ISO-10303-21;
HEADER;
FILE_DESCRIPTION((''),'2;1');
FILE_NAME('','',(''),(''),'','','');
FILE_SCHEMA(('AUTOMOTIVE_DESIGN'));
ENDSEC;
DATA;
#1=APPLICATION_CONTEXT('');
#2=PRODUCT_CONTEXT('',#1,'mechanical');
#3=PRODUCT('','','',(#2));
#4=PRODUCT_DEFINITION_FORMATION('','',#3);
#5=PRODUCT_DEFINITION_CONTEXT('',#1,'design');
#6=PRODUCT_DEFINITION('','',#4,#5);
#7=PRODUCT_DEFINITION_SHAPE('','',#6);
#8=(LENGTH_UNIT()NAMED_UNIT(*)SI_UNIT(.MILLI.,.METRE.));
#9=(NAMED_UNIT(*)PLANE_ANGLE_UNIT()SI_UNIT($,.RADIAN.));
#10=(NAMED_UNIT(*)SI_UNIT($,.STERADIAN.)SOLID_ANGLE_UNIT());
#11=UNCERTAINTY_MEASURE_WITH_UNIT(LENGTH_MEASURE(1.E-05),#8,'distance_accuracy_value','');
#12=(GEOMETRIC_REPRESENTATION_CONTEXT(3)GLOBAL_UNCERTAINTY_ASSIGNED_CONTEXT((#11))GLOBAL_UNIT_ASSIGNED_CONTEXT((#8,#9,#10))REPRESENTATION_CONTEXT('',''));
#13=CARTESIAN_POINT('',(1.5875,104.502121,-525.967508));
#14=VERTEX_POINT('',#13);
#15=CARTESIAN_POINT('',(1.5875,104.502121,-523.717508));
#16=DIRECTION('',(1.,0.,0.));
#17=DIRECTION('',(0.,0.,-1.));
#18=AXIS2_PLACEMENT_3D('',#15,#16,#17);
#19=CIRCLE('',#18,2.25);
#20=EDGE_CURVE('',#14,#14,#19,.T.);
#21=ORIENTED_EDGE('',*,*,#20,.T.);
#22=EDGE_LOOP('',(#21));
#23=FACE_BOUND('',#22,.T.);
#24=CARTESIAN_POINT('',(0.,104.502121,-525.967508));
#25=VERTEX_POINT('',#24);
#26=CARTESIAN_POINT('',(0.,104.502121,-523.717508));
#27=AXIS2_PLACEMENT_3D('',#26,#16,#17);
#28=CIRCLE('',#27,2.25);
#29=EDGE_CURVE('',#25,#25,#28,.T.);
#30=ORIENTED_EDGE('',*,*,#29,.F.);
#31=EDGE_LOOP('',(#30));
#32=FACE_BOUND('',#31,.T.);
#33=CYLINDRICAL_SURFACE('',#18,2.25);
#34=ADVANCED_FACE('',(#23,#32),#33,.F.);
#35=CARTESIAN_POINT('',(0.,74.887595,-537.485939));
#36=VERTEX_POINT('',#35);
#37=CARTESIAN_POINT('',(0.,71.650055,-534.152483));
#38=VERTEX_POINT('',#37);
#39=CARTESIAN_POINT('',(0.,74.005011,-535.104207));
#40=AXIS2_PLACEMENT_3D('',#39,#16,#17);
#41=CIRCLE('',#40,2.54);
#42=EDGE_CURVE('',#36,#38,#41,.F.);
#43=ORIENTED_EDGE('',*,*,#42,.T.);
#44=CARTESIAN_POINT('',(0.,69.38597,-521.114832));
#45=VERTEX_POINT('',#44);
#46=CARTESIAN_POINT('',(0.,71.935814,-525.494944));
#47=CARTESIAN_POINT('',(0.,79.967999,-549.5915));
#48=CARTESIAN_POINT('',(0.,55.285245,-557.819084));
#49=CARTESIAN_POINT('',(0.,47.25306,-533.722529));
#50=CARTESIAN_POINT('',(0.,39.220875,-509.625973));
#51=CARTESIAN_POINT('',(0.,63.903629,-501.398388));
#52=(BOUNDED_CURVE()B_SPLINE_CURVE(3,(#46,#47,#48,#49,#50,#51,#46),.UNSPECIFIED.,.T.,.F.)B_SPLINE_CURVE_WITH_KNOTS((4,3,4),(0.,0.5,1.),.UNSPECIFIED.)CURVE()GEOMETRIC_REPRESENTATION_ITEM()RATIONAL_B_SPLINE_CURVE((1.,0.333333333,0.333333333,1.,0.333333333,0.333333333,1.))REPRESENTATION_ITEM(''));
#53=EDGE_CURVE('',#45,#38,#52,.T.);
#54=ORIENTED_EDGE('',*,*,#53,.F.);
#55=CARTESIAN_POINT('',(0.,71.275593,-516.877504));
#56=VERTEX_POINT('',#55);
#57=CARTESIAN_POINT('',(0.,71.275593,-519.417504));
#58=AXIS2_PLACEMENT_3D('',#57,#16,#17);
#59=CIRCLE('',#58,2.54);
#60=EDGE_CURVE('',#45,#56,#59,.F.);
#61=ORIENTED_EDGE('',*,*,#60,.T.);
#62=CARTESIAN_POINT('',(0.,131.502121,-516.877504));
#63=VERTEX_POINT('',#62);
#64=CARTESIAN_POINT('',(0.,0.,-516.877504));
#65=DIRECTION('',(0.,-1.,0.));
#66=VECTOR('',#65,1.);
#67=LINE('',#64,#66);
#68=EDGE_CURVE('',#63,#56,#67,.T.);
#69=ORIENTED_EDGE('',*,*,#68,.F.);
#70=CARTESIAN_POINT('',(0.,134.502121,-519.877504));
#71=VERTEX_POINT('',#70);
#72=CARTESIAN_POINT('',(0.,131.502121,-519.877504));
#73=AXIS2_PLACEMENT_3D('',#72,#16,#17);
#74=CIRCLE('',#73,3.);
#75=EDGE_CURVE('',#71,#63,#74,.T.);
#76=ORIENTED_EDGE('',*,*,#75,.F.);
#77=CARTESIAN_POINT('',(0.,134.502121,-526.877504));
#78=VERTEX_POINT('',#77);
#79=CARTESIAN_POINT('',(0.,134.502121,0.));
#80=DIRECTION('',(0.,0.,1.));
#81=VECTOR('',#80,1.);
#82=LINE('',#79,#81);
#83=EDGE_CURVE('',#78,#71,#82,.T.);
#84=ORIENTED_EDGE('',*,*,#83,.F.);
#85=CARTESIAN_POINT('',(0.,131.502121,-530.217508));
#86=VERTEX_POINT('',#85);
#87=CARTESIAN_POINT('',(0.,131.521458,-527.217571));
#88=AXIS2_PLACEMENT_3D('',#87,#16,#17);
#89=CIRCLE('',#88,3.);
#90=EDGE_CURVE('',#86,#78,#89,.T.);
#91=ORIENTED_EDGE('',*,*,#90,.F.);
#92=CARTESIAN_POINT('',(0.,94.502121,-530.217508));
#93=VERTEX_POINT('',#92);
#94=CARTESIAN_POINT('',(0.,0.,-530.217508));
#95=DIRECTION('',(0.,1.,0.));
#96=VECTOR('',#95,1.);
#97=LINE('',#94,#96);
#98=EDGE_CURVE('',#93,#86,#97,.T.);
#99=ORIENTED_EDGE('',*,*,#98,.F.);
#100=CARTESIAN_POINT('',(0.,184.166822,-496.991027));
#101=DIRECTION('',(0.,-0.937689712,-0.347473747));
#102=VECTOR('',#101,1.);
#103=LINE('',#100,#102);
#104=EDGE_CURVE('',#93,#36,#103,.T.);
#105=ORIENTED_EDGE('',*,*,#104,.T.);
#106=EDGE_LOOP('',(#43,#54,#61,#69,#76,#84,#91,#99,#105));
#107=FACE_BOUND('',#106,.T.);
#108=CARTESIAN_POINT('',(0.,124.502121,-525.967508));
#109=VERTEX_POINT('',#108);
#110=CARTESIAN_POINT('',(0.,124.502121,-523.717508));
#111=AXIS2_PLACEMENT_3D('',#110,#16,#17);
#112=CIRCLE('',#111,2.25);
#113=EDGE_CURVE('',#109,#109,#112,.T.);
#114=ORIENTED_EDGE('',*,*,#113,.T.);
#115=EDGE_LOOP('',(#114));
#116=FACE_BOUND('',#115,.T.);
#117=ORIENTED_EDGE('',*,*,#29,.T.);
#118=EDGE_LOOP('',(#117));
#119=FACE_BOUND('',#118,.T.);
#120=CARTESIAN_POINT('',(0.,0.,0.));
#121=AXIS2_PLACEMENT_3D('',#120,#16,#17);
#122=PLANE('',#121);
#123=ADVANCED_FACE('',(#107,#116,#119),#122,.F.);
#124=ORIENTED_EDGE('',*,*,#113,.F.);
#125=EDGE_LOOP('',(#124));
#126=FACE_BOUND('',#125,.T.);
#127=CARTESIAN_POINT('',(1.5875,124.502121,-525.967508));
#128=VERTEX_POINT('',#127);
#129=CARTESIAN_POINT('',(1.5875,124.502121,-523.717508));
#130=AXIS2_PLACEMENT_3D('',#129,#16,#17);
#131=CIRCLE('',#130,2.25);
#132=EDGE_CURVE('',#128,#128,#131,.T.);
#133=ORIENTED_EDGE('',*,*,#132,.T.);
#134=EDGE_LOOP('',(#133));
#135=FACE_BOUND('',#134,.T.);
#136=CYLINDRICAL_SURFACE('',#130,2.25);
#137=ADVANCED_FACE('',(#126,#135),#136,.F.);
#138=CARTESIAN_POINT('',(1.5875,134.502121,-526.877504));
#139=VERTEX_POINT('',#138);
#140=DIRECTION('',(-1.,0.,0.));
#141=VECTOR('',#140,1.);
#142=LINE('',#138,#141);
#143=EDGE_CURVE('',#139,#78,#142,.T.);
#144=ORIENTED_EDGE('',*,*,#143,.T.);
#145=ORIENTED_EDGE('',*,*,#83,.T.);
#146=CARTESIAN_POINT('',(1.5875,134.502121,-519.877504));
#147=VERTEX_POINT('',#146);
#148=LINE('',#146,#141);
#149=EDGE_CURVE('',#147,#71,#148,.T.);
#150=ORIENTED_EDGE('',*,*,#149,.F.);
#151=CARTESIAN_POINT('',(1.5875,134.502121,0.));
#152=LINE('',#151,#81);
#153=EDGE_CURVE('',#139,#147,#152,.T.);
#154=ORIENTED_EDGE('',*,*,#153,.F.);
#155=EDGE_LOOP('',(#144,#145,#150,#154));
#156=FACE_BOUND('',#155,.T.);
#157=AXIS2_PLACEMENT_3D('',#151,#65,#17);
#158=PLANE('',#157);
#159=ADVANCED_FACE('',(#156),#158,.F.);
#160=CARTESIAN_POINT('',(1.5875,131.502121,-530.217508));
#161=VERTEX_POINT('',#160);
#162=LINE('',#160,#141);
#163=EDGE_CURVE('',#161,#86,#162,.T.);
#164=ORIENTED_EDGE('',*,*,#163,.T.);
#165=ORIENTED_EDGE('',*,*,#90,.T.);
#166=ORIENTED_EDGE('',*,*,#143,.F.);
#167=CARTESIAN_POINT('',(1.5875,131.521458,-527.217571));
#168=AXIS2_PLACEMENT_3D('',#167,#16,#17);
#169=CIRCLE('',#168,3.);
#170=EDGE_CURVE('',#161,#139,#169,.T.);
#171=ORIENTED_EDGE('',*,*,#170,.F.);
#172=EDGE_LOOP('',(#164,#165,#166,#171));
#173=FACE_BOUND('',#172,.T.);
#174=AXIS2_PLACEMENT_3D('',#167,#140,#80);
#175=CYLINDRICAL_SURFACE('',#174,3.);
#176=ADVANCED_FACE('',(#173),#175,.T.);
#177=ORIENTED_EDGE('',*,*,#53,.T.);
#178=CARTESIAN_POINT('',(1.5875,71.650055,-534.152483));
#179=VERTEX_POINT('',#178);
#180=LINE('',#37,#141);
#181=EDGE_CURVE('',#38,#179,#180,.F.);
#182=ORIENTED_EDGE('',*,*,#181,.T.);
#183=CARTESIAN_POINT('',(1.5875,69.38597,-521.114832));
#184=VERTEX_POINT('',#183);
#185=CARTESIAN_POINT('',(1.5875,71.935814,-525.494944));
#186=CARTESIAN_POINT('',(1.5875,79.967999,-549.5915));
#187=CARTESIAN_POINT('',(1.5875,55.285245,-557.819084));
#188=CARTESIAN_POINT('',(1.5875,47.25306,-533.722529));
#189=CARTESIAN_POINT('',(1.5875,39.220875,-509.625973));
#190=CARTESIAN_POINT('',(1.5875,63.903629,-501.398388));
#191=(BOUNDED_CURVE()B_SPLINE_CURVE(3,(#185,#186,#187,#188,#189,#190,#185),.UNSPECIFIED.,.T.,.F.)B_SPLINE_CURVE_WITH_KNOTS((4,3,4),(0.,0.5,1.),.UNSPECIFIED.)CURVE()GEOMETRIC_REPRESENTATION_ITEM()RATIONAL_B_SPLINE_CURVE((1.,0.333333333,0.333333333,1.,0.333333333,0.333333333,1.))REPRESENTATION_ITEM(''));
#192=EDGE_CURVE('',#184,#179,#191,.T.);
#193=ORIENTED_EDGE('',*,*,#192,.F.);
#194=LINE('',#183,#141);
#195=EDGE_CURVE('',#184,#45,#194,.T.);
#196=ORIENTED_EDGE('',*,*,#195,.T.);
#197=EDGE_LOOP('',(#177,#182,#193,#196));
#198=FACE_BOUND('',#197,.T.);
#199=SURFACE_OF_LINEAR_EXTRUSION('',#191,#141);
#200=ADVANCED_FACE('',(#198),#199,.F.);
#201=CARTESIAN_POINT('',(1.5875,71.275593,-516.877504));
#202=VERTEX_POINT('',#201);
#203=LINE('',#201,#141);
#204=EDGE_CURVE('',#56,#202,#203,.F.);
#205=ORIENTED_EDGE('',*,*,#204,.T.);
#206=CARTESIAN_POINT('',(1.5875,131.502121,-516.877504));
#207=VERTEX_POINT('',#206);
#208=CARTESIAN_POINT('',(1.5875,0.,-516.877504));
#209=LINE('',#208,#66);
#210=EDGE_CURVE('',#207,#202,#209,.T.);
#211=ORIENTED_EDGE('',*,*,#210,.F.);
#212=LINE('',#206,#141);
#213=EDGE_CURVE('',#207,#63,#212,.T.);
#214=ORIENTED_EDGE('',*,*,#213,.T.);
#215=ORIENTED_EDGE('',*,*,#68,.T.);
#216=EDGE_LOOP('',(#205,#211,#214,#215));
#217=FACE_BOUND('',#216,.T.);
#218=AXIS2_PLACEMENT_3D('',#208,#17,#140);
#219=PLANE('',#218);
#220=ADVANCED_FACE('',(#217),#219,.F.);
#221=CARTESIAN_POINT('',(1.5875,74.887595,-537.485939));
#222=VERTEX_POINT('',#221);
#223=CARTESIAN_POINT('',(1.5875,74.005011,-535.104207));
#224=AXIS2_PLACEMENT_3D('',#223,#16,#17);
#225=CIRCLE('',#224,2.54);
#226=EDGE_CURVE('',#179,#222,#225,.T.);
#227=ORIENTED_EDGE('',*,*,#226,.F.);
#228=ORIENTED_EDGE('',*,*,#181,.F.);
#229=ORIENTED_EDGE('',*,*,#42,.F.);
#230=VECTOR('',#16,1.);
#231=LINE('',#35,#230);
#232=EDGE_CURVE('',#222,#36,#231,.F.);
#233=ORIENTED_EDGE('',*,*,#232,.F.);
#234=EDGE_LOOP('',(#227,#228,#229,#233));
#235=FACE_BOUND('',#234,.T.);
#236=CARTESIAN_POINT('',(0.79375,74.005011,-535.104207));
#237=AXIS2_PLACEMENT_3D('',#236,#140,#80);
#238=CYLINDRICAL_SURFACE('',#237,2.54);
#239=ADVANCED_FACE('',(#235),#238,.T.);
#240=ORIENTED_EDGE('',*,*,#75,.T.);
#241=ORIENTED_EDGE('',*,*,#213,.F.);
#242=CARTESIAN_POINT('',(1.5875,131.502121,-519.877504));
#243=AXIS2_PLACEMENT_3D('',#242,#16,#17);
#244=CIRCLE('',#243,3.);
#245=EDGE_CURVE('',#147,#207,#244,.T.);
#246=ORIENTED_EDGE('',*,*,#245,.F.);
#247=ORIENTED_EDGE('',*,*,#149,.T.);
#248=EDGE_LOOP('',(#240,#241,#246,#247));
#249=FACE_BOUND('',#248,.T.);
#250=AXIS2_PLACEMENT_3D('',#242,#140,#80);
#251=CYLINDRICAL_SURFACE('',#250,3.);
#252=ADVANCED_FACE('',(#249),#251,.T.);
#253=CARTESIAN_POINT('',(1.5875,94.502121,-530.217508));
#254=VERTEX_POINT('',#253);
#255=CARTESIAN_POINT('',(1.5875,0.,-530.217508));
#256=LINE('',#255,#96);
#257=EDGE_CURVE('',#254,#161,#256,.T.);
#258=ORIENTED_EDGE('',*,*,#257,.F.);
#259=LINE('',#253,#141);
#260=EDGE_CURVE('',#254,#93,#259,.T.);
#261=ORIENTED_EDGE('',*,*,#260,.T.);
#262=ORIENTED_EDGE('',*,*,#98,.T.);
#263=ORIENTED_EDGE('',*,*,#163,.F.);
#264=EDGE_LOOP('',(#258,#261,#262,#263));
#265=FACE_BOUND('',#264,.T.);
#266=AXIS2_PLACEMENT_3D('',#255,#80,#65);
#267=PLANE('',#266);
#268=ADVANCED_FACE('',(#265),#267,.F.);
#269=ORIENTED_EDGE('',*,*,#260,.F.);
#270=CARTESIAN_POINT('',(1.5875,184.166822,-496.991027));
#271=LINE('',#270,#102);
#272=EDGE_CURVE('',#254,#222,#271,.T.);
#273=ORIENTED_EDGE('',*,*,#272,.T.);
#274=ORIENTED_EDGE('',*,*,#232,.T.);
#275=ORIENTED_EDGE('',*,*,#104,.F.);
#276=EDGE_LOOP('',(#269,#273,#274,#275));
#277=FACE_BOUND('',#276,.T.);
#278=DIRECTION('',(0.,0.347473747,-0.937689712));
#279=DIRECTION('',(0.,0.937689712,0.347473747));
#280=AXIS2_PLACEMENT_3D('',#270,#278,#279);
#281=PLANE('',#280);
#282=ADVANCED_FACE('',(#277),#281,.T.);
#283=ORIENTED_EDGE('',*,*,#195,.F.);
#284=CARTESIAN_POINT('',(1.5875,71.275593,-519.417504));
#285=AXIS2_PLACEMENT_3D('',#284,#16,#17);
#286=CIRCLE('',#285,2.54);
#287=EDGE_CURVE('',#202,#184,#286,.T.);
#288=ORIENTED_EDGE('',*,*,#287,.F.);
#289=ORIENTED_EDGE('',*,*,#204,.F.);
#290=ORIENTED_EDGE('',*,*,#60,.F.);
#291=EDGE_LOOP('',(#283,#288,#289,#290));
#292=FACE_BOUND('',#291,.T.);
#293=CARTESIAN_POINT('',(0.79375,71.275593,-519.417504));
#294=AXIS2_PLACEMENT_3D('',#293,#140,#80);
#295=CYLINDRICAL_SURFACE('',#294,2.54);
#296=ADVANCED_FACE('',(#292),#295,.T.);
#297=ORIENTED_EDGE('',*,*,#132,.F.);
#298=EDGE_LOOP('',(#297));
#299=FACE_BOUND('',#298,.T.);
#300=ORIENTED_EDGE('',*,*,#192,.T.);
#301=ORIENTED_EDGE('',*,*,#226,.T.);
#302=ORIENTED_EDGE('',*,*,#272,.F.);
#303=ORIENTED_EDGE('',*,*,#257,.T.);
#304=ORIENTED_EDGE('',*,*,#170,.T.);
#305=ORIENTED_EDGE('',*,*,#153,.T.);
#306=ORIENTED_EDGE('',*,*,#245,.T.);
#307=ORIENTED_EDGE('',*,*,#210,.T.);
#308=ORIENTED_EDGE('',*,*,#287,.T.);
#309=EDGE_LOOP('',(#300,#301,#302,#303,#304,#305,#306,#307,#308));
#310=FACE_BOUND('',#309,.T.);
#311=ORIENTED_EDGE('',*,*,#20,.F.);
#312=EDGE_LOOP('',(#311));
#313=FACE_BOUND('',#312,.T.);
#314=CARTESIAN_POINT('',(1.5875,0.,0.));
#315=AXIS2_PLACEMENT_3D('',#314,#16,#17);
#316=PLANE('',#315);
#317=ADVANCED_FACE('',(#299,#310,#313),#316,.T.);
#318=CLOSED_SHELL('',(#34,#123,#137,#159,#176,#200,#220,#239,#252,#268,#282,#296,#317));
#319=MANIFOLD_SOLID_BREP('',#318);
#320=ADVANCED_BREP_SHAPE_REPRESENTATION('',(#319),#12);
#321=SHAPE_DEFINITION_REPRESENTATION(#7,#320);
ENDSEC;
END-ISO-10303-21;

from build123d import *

# Parameters (mm, degrees)
SKETCH1_R            = 3.025
BOSS_EXTRUDE1_DEPTH  = 1.5875
FILLET1_START        = -1
FILLET1_DEPTH        = 4
M4_CLEARANCE_HOLE1_D = 4.5


with BuildPart() as part:
    # Sketch1 → Boss-Extrude1 (new body)
    # profile 1 of 4: a face of its own
    with BuildSketch(Plane(origin=(0, 0, 0), x_dir=(0, 0, -1), z_dir=(1, 0, 0))):
        with BuildLine():
            Line((541.51052412, 64.02688415), (530.217508306, 94.502121028))
            Line((530.217508306, 94.502121028), (516.877503621, 94.502121028))
            Line((516.877503621, 94.502121028), (516.877503621, 59.781603486))
            add(Edge.make_bspline(
                [(516.877503621, 59.781603486), (516.877503621, 66.224434359), (520.85597879, 70.389492112), (525.494944029, 71.935813858)],
                knots=[0.791503971, 0.791503971, 0.791503971, 0.791503971, 1, 1, 1, 1], degree=3, weights=[0.513780637, 0.559932173, 0.722005294, 1]))
            add(Edge.make_bspline(
                [(525.494944029, 71.935813858), (531.367057327, 73.893184958), (538.581630796, 71.930770882), (541.51052412, 64.02688415)],
                knots=[0, 0, 0, 0, 0.245758306, 0.245758306, 0.245758306, 0.245758306], degree=3, weights=[1, 0.672322259, 0.505703571, 0.500143936]))
        make_face()
    # profile 2 of 4: a face of its own
    with BuildSketch(Plane(origin=(0, 0, 0), x_dir=(0, 0, -1), z_dir=(1, 0, 0))):
        with BuildLine():
            Line((516.877503621, 131.502121028), (516.877503621, 94.502121028))
            Line((516.877503621, 94.502121028), (530.217508306, 94.502121028))
            Line((530.217508306, 94.502121028), (530.217508306, 131.502121028))
            ThreePointArc((530.217508306, 131.502121028), (529.222247158, 133.753333946), (526.877503621, 134.502121028))
            Line((526.877503621, 134.502121028), (519.877503621, 134.502121028))
            ThreePointArc((519.877503621, 134.502121028), (517.756183277, 133.623441372), (516.877503621, 131.502121028))
        make_face()
        with Locations((523.717508306, 104.502121028)):
            Circle(SKETCH1_R, mode=Mode.SUBTRACT)
        with Locations((523.717508306, 124.502121028)):
            Circle(SKETCH1_R, mode=Mode.SUBTRACT)
    # profile 3 of 4: a face of its own
    with BuildSketch(Plane(origin=(0, 0, 0), x_dir=(0, 0, -1), z_dir=(1, 0, 0))):
        with Locations((523.717508306, 104.502121028)):
            Circle(SKETCH1_R)
    # profile 4 of 4: a face of its own
    with BuildSketch(Plane(origin=(0, 0, 0), x_dir=(0, 0, -1), z_dir=(1, 0, 0))):
        with Locations((523.717508306, 124.502121028)):
            Circle(SKETCH1_R)
    extrude(amount=BOSS_EXTRUDE1_DEPTH)

    # Fillet1: read off the stored shape, not the designer's step
    # Fillet1 outline → Fillet1 (cut)
    with BuildSketch(Plane.YZ.offset(FILLET1_START)):
        with BuildLine():
            add(Edge.make_bspline(
                [(59.781603486, -516.877503621), (63.745099458, -516.877503621), (67.076255883, -518.543444616), (69.385969927, -521.114832125)],
                knots=[0.791503971, 0.791503971, 0.791503971, 0.791503971, 0.915480845, 0.915480845, 0.915480845, 0.915480845], degree=3, weights=[0.513780637, 0.541223477, 0.609653692, 0.719071281]))
            ThreePointArc((69.385969927, -521.114832125), (68.955807133, -518.383002389), (71.275593157, -516.877503621))
            Line((71.275593157, -516.877503621), (59.781603486, -516.877503621))
        make_face()
        with BuildLine():
            ThreePointArc((74.887594645, -537.485939312), (72.182937452, -536.873853395), (71.650054639, -534.152483223))
            add(Edge.make_bspline(
                [(71.650054639, -534.152483223), (70.307636138, -537.474178056), (67.681794337, -540.156147165), (64.02688415, -541.51052412)],
                knots=[1.132789983, 1.132789983, 1.132789983, 1.132789983, 1.245758306, 1.245758306, 1.245758306, 1.245758306], degree=3, weights=[0.609905504, 0.539286736, 0.502699547, 0.500143936]))
            Line((64.02688415, -541.51052412), (74.887594645, -537.485939312))
        make_face()
    extrude(amount=FILLET1_DEPTH, mode=Mode.SUBTRACT)

    # M4 Clearance Hole1 (through all)
    with Locations(Plane(origin=(1.5875, 0, 0), x_dir=(0, 0, -1), z_dir=(1, 0, 0))):
        with Locations((523.717508306, 124.502121028), (523.717508306, 104.502121028)):
            Hole(M4_CLEARANCE_HOLE1_D / 2)


solid = part.part
